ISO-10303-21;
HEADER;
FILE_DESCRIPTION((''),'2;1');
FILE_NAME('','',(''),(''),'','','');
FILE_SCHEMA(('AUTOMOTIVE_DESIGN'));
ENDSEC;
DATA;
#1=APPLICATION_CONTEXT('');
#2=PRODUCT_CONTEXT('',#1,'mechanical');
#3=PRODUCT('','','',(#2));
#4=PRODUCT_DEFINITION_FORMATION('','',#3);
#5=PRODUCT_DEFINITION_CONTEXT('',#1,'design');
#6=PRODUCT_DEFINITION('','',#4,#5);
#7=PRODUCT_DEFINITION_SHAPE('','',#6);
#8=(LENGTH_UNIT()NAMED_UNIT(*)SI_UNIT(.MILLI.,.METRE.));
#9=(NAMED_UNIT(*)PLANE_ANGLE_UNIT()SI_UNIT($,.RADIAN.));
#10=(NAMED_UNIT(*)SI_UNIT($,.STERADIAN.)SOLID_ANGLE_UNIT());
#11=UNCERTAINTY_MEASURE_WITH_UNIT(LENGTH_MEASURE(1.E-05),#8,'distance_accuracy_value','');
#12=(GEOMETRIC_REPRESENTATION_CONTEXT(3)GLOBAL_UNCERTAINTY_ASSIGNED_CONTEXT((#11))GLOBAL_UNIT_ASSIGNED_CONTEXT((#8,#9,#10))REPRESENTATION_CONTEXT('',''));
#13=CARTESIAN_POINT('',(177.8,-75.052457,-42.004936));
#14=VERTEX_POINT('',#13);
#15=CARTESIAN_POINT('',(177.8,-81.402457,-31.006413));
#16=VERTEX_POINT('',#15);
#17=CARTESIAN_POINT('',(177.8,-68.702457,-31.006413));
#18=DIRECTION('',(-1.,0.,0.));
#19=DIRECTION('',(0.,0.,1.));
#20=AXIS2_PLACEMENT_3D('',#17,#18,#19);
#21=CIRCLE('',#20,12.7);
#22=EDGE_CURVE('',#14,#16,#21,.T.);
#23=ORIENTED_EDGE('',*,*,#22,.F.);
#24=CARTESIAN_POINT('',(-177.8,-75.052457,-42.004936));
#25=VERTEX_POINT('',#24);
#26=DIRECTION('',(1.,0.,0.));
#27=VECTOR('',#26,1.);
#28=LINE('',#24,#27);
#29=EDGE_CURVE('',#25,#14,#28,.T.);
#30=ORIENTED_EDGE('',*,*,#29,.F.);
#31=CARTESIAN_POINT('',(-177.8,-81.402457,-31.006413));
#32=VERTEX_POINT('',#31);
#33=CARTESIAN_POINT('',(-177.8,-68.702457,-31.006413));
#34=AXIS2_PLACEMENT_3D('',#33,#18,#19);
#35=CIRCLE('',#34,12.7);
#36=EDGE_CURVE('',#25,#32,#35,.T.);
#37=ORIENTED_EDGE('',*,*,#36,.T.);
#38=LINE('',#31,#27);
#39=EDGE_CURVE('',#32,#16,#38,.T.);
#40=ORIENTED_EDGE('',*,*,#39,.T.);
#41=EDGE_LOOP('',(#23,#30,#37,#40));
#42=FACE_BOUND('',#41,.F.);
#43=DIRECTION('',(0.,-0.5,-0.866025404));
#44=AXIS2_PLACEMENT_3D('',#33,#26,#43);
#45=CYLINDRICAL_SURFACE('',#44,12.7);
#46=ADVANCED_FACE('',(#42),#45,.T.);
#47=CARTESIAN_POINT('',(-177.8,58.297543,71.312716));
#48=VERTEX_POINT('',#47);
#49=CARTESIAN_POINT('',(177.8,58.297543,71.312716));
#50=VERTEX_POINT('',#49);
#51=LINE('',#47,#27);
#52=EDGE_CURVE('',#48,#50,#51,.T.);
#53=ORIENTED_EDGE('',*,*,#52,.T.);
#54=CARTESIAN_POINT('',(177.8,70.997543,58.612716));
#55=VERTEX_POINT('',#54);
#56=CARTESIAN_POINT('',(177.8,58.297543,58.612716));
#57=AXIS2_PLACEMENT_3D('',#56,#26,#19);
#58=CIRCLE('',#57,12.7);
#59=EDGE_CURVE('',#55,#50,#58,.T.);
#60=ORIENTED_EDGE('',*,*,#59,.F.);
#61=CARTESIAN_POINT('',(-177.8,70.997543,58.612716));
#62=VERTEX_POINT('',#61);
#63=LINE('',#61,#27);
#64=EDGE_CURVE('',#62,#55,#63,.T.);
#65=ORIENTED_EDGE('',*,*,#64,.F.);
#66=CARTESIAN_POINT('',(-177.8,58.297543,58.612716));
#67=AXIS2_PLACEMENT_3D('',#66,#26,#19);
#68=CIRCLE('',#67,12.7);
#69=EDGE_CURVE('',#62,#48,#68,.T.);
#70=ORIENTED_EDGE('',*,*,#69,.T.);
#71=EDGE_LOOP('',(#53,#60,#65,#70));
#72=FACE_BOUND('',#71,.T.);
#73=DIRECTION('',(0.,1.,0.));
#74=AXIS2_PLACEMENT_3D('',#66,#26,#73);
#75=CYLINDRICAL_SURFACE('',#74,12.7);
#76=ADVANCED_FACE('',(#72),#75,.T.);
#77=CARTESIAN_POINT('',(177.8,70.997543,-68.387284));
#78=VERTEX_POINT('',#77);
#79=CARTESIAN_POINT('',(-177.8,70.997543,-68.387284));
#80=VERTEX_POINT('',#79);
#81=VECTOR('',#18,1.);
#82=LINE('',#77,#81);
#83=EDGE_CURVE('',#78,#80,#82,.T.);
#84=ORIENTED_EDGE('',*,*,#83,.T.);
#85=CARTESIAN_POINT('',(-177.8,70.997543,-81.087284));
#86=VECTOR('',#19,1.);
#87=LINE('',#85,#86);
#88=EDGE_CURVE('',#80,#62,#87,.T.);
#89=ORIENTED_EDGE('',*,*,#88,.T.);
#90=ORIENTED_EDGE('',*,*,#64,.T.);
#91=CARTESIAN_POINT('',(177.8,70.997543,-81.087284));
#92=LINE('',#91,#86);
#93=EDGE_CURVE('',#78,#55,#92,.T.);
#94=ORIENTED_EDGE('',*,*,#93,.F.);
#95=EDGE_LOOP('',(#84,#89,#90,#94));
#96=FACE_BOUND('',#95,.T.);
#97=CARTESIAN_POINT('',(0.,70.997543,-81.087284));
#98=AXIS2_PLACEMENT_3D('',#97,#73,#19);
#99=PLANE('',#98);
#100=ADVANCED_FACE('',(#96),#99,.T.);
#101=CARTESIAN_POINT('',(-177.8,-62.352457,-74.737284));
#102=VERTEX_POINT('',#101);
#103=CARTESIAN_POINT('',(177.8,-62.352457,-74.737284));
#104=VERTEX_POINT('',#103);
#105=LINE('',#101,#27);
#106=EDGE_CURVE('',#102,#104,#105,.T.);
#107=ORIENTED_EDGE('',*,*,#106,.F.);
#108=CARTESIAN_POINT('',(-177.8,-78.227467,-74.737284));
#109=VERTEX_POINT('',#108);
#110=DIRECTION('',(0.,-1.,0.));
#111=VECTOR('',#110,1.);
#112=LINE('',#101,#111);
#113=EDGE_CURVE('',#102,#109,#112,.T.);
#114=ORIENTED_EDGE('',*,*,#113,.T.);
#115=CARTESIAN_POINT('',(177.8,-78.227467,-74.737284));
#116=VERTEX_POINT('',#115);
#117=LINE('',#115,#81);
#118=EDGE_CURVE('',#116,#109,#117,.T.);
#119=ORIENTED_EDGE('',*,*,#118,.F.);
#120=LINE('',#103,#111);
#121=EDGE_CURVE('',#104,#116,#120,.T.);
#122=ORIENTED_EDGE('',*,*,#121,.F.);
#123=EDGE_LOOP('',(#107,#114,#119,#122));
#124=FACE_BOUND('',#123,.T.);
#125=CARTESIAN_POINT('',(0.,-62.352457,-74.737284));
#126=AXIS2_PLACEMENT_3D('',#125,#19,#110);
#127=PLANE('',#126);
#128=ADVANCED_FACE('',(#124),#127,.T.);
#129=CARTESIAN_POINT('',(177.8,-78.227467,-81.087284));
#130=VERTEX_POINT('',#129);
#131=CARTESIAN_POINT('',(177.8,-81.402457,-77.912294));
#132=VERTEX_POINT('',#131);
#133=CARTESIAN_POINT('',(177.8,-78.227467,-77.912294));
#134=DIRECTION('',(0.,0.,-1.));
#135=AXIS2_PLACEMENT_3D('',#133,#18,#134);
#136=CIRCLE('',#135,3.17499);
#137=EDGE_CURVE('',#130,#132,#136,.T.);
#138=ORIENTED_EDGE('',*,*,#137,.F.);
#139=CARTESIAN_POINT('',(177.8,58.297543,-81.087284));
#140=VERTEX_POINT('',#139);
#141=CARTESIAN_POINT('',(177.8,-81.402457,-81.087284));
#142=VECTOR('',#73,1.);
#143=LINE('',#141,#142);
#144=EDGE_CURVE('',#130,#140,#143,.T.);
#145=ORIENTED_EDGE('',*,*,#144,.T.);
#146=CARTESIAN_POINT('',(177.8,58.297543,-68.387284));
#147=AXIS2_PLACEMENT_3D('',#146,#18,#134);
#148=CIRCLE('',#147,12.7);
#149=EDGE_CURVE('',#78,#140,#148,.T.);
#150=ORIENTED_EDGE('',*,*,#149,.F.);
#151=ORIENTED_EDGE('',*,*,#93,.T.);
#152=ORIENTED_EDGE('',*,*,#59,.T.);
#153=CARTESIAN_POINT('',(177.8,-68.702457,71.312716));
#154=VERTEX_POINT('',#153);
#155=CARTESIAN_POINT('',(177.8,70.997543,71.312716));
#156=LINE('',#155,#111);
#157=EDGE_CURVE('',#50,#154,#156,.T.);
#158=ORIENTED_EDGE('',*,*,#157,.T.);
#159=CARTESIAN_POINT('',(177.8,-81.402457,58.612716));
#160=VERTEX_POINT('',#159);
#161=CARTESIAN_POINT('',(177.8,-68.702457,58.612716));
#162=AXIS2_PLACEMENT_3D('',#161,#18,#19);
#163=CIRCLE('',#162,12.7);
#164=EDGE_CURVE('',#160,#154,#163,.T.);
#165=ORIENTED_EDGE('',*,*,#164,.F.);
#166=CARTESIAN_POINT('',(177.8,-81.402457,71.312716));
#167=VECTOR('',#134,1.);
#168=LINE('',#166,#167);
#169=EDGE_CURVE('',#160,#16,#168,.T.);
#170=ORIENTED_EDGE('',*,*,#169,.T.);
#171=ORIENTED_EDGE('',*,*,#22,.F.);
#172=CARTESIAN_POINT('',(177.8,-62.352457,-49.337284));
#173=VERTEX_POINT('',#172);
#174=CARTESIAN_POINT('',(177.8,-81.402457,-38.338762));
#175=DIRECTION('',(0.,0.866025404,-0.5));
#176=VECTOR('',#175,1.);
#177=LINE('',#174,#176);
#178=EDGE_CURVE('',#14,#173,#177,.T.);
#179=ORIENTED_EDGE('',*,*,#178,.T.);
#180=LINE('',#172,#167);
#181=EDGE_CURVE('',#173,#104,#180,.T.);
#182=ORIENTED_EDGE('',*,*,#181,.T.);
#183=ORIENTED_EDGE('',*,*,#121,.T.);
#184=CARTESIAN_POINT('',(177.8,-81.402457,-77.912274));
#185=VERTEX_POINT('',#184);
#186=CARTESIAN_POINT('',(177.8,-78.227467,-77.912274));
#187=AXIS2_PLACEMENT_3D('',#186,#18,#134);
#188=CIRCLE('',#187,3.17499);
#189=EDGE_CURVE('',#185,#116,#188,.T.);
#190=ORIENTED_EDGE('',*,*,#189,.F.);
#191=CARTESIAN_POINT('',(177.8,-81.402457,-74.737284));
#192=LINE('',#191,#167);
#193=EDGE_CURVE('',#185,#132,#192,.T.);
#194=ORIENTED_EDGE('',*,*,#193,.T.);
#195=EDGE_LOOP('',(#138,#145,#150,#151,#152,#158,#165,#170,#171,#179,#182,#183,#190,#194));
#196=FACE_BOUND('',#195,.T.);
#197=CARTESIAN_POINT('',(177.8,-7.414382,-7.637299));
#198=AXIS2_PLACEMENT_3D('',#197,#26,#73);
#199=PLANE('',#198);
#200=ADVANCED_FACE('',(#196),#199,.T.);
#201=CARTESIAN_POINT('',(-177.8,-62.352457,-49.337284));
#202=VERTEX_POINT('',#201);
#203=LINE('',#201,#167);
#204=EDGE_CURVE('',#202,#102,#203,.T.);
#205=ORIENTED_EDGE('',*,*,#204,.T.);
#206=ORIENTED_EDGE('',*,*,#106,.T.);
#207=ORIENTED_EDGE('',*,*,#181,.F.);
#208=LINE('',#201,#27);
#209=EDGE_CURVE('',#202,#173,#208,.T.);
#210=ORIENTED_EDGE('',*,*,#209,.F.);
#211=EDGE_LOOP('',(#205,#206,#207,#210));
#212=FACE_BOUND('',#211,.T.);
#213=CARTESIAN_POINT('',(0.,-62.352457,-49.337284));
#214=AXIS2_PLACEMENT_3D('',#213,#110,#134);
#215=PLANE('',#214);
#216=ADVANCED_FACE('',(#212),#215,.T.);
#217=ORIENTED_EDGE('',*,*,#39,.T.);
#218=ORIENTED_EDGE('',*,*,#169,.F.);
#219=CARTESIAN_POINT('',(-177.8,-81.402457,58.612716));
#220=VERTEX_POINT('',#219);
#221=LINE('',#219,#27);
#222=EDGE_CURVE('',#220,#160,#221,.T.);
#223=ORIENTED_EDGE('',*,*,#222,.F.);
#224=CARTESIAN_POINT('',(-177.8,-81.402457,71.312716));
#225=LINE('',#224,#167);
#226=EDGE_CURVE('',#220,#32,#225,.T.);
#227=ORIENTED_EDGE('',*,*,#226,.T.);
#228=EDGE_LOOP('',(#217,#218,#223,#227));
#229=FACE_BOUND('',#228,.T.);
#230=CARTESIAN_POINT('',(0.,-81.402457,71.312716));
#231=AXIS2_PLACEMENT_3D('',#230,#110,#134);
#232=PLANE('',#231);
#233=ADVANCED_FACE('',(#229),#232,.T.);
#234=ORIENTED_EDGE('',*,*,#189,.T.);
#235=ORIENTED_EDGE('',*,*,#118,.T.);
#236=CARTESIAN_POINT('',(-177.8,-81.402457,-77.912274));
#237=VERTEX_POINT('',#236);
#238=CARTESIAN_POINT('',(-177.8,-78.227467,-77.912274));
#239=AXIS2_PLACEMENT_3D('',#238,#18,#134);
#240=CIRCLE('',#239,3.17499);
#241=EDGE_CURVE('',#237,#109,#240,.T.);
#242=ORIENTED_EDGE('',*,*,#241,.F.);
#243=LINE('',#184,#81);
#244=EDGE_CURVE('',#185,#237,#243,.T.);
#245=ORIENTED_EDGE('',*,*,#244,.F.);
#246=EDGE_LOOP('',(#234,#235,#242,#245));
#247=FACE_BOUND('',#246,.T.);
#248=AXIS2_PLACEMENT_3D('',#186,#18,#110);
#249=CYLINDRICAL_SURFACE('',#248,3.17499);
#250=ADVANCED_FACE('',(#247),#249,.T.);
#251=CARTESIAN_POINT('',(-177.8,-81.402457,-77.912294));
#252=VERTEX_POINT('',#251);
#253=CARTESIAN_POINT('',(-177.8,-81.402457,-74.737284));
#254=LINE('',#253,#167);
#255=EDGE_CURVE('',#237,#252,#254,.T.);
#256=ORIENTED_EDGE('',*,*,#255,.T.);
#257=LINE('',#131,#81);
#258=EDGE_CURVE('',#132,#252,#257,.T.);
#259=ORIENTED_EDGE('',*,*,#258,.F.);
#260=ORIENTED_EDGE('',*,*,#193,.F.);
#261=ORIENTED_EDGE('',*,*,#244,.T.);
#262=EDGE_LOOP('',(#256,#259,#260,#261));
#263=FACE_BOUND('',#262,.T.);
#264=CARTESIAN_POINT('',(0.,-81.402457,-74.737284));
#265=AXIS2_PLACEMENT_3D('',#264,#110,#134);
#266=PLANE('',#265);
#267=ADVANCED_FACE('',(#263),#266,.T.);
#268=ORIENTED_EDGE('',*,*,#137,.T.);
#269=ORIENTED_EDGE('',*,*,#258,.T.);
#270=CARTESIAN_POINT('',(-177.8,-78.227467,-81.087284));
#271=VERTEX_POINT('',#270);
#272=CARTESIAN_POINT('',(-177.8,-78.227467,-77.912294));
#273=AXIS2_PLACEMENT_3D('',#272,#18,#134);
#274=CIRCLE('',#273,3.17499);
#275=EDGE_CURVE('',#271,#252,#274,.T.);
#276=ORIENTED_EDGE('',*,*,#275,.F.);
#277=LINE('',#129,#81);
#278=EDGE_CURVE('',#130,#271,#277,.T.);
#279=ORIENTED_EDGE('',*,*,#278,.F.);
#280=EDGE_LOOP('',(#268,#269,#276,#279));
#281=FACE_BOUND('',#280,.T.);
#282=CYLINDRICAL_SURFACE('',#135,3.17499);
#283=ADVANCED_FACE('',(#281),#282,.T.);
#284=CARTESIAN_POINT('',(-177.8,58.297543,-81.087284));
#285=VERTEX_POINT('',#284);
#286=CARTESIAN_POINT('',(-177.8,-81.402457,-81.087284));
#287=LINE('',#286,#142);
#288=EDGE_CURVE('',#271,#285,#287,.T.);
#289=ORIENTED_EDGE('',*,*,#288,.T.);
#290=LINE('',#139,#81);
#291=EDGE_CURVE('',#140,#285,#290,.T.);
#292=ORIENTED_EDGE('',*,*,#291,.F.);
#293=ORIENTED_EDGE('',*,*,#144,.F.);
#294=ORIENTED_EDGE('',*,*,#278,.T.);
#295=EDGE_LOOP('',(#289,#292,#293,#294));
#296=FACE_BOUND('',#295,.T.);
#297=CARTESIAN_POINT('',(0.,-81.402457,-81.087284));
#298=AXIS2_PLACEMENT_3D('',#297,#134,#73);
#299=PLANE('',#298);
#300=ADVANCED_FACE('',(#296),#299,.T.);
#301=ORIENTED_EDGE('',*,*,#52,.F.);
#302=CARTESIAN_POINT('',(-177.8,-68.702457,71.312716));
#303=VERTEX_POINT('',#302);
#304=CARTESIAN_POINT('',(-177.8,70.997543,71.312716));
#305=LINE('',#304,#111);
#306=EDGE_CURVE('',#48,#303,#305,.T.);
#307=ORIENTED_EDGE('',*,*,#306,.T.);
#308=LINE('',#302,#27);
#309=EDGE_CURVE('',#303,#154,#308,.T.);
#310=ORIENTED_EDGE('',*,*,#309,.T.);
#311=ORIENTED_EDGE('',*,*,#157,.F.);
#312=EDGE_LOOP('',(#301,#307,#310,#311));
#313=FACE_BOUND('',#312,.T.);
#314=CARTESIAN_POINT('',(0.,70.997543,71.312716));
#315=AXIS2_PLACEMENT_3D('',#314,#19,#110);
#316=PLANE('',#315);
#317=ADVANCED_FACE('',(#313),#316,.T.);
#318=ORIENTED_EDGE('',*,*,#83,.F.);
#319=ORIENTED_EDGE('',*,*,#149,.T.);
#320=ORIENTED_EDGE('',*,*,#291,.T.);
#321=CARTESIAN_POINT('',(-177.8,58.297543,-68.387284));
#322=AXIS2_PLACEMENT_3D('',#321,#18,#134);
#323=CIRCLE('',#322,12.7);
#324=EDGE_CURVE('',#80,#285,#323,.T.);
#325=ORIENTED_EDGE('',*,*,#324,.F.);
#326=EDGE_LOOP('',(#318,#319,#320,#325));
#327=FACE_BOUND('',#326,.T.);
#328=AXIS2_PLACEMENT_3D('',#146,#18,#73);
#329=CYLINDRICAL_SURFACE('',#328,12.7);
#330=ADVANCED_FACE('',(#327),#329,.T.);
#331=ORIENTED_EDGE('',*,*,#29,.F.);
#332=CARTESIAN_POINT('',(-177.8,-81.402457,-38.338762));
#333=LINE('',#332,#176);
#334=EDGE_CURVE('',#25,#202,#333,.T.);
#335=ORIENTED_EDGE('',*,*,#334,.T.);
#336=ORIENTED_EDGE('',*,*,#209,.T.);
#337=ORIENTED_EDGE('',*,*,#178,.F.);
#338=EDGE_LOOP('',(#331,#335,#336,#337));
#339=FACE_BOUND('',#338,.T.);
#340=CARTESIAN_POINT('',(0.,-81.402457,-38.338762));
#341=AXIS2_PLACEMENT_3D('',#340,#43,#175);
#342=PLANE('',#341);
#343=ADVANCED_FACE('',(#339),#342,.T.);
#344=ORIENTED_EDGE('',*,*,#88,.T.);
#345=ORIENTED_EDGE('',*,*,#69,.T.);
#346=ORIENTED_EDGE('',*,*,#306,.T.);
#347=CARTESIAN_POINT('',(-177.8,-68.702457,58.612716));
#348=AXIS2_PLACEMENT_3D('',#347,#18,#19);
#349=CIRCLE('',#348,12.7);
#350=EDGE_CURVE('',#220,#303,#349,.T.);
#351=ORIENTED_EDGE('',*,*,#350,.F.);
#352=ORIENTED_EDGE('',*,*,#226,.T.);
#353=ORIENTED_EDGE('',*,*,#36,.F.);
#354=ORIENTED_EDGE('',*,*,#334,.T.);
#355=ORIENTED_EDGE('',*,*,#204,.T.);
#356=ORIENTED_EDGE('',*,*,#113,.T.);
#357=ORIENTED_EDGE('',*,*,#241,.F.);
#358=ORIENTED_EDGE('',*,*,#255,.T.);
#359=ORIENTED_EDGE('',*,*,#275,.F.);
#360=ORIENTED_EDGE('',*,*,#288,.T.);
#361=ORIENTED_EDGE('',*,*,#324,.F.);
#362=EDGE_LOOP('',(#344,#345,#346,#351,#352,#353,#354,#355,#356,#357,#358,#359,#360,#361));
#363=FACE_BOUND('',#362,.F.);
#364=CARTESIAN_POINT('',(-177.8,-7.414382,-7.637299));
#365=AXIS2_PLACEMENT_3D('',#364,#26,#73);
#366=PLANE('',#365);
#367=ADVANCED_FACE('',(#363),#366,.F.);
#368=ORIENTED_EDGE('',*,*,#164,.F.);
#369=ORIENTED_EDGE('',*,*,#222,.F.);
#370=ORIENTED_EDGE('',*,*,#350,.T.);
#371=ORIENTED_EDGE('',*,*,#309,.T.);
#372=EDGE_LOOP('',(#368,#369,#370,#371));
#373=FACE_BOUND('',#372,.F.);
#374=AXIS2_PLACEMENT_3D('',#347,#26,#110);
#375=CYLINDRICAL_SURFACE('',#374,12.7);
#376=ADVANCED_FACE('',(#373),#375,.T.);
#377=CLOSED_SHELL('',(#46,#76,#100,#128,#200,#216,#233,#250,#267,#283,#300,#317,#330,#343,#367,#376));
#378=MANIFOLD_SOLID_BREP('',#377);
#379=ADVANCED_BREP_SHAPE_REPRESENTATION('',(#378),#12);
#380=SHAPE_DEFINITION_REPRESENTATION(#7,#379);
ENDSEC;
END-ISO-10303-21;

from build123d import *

# Parameters (mm, degrees)
F1_DEPTH = 177.8
F2_R     = 12.7
F3_R     = 3.17499


# Not quite as in the source:
# - a fillet or chamfer is up to 0.001 mm smaller than in the source, because OpenCascade refuses the exact size


with BuildPart() as f1:
    # F0 (on Right) → F1 (new body, symmetric)
    with BuildSketch(Plane.YZ):
        Polygon((70.9975426912, -81.0872844047), (70.9975426912, 71.3127155953), (-81.4024573088, 71.3127155953), (-81.4024573088, -38.3387617767), (-62.3524573088, -49.3372844047), (-62.3524573088, -74.7372844047), (-81.4024573088, -74.7372844047), (-81.4024573088, -81.0872844047), align=None)
    extrude(amount=F1_DEPTH, both=True)

    # F2
    f2_edges = [f1.edges().sort_by_distance(p)[0] for p in [
        (0, -81.402457, -38.338762),
        (0, -81.402457, 71.312716),
        (0, 70.997543, 71.312716),
        (0, 70.997543, -81.087284),
    ]]
    fillet(f2_edges, radius=F2_R)

    # F3 (radius 3.175 in the source; OpenCascade refuses exactly that, so slightly less here)
    f3_edges = [f1.edges().sort_by_distance(p)[0] for p in [
        (0, -81.402457, -74.737284),
        (0, -81.402457, -81.087284),
    ]]
    fillet(f3_edges, radius=F3_R)


solid = f1.part
